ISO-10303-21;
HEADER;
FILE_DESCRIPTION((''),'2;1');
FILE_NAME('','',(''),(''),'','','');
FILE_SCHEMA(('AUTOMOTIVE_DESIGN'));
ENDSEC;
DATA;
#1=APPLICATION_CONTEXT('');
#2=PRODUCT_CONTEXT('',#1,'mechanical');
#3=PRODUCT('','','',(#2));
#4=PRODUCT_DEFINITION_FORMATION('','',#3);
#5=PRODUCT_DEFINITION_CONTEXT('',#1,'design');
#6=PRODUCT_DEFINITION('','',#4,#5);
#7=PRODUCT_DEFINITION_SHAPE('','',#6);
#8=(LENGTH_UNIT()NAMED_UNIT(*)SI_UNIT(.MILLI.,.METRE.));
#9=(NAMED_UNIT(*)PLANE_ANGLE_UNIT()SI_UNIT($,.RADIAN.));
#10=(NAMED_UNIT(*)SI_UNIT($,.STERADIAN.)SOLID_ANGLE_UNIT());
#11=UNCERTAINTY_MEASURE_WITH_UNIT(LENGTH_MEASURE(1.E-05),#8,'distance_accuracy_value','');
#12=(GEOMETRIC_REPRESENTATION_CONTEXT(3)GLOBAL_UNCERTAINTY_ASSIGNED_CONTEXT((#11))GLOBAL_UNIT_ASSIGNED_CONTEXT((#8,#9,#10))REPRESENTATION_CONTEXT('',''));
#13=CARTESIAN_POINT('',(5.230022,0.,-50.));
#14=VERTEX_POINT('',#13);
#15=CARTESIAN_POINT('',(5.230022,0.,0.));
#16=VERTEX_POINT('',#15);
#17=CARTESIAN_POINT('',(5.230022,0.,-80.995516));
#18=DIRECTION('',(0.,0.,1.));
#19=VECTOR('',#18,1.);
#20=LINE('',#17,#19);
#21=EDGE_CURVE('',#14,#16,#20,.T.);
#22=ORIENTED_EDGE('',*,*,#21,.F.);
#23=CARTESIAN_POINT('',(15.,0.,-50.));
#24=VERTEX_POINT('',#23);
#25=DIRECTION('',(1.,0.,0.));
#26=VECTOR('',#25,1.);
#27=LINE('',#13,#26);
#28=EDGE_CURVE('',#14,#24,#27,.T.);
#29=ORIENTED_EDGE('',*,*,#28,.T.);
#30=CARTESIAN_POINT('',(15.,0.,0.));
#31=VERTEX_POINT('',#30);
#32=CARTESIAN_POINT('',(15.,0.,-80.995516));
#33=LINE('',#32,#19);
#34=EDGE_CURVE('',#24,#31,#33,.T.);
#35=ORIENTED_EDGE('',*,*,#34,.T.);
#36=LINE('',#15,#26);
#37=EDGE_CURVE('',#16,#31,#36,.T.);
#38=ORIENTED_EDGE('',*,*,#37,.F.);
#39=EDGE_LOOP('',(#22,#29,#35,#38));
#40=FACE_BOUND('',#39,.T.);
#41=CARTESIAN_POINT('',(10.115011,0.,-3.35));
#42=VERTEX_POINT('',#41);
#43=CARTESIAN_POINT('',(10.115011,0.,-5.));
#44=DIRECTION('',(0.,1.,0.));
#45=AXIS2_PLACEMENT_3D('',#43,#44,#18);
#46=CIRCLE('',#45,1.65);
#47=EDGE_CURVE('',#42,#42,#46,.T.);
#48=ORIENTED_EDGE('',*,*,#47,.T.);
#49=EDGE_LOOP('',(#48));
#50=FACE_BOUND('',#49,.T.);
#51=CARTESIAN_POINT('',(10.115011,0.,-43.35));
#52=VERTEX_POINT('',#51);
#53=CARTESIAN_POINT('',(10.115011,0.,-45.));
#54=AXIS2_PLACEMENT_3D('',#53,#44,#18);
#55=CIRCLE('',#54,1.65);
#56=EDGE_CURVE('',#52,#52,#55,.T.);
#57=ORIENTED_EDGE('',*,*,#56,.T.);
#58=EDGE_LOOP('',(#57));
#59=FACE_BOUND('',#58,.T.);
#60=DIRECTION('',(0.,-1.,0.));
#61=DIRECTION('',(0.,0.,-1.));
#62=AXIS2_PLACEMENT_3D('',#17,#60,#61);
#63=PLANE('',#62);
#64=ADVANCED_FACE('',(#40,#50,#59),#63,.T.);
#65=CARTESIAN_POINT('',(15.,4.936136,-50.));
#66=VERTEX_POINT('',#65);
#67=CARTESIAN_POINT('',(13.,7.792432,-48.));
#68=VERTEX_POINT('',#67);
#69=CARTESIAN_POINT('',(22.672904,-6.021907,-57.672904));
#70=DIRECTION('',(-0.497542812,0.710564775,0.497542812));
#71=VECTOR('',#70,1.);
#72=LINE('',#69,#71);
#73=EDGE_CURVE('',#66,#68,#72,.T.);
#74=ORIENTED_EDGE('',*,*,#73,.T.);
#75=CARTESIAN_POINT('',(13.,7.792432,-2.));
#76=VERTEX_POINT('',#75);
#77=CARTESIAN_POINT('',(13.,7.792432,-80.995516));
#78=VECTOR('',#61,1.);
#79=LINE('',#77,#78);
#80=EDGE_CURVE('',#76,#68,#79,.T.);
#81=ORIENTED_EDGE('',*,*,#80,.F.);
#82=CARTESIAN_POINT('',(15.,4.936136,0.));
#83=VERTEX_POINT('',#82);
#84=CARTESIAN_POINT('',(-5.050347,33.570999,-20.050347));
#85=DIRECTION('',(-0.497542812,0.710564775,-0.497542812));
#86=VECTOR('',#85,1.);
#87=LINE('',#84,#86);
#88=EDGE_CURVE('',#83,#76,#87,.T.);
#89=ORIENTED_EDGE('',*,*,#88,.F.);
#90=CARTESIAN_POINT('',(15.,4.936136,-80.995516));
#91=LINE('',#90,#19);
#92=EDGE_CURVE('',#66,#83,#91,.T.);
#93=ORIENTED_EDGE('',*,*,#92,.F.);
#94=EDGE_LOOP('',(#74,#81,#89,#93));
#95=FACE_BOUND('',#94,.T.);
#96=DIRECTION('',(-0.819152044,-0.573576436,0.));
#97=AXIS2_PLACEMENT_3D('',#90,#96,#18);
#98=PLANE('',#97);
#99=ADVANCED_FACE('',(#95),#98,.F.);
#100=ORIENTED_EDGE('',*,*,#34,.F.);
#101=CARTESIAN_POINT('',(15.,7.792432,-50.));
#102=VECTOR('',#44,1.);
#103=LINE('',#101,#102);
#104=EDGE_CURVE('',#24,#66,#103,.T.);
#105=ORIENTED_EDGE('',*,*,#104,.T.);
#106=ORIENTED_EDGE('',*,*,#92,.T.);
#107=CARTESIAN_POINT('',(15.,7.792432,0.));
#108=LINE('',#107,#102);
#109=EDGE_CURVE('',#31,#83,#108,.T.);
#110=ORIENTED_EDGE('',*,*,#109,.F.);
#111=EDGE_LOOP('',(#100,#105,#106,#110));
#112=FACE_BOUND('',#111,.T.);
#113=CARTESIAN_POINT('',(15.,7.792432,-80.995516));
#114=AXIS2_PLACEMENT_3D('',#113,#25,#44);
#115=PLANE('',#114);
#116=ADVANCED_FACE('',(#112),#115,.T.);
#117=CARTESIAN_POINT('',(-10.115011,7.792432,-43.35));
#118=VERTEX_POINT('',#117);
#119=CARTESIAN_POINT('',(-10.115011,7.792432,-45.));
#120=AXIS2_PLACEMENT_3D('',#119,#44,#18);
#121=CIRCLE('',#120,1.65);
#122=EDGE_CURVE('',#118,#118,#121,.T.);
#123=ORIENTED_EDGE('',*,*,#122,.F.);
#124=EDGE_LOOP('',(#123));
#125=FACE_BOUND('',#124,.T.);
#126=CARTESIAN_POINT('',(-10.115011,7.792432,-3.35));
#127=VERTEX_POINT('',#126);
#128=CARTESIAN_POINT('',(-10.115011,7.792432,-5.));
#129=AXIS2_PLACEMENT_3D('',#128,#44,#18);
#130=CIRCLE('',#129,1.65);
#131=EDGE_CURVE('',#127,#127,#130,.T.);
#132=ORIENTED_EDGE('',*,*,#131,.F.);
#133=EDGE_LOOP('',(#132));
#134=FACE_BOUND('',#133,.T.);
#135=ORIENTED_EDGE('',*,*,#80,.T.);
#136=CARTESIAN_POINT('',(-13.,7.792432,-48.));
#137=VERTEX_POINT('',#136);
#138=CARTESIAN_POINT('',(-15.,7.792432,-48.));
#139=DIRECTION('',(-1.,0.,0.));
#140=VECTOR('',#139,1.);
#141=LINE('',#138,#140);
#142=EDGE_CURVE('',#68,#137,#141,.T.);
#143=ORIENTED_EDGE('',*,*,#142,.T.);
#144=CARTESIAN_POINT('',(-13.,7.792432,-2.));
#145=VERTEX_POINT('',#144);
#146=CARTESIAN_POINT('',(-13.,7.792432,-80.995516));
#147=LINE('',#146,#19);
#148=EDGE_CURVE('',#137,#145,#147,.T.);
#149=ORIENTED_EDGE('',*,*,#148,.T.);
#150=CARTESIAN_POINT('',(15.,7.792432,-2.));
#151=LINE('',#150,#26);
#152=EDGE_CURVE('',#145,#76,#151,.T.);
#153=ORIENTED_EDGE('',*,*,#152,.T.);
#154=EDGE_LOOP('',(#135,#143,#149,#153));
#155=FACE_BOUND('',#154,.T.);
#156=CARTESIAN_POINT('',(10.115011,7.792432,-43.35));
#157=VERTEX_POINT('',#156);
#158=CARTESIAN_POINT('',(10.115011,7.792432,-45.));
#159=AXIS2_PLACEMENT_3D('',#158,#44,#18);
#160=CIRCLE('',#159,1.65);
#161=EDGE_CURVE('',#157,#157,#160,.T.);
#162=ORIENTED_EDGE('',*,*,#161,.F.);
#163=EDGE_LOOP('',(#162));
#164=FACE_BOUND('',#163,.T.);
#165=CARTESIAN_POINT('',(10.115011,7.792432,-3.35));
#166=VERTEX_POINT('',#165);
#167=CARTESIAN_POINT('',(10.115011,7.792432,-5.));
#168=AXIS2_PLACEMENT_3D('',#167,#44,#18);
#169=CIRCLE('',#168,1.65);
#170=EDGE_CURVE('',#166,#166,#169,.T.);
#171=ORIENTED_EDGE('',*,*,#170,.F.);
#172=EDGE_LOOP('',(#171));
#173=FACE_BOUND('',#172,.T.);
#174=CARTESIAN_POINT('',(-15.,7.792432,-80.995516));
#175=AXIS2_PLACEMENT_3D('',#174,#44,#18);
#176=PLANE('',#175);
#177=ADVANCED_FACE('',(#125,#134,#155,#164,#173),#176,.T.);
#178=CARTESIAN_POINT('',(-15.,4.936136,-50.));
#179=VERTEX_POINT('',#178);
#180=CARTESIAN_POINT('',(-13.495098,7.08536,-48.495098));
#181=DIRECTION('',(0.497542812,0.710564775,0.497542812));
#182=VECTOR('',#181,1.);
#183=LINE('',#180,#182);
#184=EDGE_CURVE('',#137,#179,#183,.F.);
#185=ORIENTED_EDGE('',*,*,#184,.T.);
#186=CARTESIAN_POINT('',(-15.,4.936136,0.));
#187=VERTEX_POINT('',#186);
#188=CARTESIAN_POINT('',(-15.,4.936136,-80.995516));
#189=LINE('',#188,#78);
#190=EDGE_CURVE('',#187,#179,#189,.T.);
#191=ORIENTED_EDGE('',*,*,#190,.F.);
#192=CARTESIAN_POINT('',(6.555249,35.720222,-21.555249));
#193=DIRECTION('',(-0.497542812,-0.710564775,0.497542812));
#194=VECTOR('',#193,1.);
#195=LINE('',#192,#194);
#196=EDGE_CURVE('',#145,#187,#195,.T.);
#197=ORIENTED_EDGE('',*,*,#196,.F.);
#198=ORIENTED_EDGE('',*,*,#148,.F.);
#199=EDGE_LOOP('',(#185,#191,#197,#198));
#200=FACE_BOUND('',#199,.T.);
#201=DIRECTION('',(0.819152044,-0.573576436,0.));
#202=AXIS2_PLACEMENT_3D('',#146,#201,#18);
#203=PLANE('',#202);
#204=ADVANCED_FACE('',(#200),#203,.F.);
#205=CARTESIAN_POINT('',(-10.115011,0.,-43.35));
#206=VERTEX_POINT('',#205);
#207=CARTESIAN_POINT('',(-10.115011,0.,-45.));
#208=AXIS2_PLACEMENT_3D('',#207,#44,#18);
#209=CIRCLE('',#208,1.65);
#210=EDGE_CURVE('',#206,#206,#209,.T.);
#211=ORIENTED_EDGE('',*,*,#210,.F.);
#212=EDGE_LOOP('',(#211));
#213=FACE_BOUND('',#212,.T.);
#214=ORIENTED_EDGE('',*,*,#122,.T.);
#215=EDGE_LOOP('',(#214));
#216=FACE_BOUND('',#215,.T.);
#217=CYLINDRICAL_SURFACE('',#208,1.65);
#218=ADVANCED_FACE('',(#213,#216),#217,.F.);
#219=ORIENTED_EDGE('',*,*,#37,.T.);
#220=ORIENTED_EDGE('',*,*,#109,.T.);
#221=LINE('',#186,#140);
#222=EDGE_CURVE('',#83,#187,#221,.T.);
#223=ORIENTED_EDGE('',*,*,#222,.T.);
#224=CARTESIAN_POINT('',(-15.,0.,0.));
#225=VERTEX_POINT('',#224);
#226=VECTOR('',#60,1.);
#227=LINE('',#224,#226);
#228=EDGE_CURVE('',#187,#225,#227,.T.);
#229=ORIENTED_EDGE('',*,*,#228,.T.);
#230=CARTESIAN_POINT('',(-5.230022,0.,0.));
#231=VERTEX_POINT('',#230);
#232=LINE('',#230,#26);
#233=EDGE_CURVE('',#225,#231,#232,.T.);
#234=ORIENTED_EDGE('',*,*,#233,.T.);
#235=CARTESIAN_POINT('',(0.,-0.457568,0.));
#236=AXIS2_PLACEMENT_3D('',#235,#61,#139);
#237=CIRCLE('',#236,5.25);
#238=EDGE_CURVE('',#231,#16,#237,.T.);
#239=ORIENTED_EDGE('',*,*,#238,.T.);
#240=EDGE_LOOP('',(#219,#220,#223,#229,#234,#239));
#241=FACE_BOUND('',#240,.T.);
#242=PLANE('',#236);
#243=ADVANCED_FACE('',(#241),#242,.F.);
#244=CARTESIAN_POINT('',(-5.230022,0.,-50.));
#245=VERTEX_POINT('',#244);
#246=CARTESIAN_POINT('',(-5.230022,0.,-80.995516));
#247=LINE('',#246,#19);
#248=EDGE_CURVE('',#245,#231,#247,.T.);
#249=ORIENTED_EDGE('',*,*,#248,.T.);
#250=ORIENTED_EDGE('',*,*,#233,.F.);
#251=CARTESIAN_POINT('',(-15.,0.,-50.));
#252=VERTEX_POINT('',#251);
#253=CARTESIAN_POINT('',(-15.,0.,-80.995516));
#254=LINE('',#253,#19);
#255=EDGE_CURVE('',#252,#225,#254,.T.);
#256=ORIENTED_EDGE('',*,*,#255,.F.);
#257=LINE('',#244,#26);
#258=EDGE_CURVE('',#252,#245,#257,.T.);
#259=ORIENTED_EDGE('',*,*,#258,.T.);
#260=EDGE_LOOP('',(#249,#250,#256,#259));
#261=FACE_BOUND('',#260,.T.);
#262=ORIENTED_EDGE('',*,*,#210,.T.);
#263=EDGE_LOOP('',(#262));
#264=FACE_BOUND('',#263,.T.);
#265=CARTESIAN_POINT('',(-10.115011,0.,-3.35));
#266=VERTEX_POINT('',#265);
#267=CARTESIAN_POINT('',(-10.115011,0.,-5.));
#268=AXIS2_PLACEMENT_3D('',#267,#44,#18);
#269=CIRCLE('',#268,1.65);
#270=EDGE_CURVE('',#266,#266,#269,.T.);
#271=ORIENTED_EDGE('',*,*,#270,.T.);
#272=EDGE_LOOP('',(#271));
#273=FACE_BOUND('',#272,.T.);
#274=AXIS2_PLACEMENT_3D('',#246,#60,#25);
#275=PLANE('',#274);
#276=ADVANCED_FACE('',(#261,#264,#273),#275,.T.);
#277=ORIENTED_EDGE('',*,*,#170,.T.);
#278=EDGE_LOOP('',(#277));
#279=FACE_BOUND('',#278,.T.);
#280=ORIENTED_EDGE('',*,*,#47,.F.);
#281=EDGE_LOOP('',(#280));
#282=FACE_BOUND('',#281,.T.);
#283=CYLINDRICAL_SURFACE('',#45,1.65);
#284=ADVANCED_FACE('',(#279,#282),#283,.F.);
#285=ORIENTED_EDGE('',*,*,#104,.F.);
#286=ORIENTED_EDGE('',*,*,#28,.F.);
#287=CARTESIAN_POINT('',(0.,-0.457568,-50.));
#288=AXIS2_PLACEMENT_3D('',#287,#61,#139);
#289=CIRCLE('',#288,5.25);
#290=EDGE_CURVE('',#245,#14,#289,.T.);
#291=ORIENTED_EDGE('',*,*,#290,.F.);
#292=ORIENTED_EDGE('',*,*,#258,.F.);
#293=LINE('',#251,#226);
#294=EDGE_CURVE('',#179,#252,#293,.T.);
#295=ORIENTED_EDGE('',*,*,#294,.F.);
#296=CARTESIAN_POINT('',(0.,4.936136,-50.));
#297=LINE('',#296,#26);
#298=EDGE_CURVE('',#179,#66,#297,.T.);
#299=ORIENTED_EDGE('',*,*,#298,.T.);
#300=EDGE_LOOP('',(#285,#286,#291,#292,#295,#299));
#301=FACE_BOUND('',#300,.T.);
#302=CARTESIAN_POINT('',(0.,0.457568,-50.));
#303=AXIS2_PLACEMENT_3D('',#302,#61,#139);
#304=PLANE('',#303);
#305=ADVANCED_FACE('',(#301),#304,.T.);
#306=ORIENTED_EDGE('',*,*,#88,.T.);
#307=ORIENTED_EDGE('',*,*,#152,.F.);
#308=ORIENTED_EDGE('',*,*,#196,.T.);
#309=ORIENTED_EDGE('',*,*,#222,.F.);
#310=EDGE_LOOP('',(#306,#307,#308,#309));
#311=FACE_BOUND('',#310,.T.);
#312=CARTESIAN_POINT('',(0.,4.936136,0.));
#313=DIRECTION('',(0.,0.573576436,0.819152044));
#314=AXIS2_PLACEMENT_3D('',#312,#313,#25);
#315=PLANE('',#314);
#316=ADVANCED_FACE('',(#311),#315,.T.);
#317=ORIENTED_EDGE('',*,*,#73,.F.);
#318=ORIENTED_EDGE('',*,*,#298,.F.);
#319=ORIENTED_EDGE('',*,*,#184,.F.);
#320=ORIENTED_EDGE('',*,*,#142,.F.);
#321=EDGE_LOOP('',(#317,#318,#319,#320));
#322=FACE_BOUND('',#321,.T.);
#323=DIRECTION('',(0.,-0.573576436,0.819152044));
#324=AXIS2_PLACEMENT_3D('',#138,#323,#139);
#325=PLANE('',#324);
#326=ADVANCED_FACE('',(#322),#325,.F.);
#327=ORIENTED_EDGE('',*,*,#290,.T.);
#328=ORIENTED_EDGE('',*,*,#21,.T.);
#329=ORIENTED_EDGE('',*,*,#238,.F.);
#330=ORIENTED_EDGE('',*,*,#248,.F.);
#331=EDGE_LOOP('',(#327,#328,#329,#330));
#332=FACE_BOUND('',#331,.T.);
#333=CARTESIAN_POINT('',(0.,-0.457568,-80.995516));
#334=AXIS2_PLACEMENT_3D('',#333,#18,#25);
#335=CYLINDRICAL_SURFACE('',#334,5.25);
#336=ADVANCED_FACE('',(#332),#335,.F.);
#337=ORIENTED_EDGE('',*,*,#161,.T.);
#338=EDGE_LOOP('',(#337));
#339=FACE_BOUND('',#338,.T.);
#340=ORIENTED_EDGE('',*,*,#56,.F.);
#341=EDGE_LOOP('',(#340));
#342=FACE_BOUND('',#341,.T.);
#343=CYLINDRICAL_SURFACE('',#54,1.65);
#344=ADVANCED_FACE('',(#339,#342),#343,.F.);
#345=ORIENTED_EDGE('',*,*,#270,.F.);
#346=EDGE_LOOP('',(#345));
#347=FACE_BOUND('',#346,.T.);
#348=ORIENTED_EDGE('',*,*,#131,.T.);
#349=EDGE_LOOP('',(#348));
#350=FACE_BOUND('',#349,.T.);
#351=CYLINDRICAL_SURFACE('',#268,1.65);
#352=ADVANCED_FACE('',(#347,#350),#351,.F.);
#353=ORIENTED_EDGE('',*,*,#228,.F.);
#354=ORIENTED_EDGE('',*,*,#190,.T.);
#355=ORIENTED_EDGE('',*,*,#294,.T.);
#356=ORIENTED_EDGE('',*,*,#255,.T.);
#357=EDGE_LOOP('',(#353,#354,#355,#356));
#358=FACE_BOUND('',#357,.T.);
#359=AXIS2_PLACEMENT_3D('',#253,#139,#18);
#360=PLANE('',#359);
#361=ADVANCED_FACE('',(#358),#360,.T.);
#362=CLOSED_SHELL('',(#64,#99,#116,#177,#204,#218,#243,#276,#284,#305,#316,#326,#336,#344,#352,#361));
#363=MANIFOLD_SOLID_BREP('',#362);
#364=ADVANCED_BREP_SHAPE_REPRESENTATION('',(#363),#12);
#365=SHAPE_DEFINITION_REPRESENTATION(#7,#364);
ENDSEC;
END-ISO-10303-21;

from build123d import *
from OCP.BRepAlgoAPI import BRepAlgoAPI_Cut
from OCP.TopTools import TopTools_ListOfShape

# Parameters (mm, degrees)
BOSS_EXTRUDE1_DEPTH = 50
SKETCH4_R           = 1.65
CUT_EXTRUDE1_DEPTH  = 7.792432
CHAMFER1_SIZE       = 2
CHAMFER1_SIZE2      = 2.856296013


with BuildPart() as part:
    # Sketch2 → Boss-Extrude1 (new body)
    with BuildSketch(Plane.XY):
        with BuildLine():
            Line((5.230022165, 0), (15, 0))
            Line((15, 0), (15, 7.792432351))
            Line((15, 7.792432351), (-15, 7.792432351))
            Line((-15, 7.792432351), (-15, 0))
            Line((-15, 0), (-5.230022165, 0))
            ThreePointArc((-5.230022165, 0), (0, 4.792432351), (5.230022165, 0))
        make_face()
    extrude(amount=-BOSS_EXTRUDE1_DEPTH)


with BuildPart() as cut_extrude1_tool:
    # Sketch4 → Cut-Extrude1 (new body)
    with BuildSketch(Plane(origin=(0, 7.792432351, 0), x_dir=(1, 0, 0), z_dir=(0, 1, 0))):
        with Locations(Location((-10.115011082, 45, 0), (0, 0, 270))):
            Circle(SKETCH4_R)
        with Locations(Location((-10.115011082, 5, 0), (0, 0, 270))):
            Circle(SKETCH4_R)
        with Locations(Location((10.115011082, 45, 0), (0, 0, 270))):
            Circle(SKETCH4_R)
        with Locations(Location((10.115011082, 5, 0), (0, 0, 270))):
            Circle(SKETCH4_R)
    extrude(amount=-CUT_EXTRUDE1_DEPTH)


with BuildPart() as part_1:
    add(part.part)

    # Cut-Extrude1: cut by cut_extrude1_tool, with a tolerance
    cut_extrude1_stock = TopTools_ListOfShape()
    cut_extrude1_stock.Append(part_1.part.wrapped)
    cut_extrude1_tools = TopTools_ListOfShape()
    cut_extrude1_tools.Append(cut_extrude1_tool.part.wrapped)
    cut_extrude1_cut = BRepAlgoAPI_Cut()
    cut_extrude1_cut.SetArguments(cut_extrude1_stock)
    cut_extrude1_cut.SetTools(cut_extrude1_tools)
    cut_extrude1_cut.SetFuzzyValue(0.00001)
    cut_extrude1_cut.Build()
    add(Compound.cast(cut_extrude1_cut.Shape()).solids(), mode=Mode.REPLACE)

    # Chamfer1
    chamfer1_edges = [part_1.edges().sort_by_distance(p)[0] for p in [
        (0, 7.792432351, 0),
        (15, 7.792432351, -25),
        (0, 7.792432351, -50),
        (-15, 7.792432351, -25),
    ]]
    chamfer1_side = [part_1.faces().sort_by_distance(p)[0] for p in [
        (0, 7.792432351, -25),
    ]]
    chamfer(chamfer1_edges, length=CHAMFER1_SIZE, length2=CHAMFER1_SIZE2, reference=chamfer1_side[0])


solid = part_1.part
